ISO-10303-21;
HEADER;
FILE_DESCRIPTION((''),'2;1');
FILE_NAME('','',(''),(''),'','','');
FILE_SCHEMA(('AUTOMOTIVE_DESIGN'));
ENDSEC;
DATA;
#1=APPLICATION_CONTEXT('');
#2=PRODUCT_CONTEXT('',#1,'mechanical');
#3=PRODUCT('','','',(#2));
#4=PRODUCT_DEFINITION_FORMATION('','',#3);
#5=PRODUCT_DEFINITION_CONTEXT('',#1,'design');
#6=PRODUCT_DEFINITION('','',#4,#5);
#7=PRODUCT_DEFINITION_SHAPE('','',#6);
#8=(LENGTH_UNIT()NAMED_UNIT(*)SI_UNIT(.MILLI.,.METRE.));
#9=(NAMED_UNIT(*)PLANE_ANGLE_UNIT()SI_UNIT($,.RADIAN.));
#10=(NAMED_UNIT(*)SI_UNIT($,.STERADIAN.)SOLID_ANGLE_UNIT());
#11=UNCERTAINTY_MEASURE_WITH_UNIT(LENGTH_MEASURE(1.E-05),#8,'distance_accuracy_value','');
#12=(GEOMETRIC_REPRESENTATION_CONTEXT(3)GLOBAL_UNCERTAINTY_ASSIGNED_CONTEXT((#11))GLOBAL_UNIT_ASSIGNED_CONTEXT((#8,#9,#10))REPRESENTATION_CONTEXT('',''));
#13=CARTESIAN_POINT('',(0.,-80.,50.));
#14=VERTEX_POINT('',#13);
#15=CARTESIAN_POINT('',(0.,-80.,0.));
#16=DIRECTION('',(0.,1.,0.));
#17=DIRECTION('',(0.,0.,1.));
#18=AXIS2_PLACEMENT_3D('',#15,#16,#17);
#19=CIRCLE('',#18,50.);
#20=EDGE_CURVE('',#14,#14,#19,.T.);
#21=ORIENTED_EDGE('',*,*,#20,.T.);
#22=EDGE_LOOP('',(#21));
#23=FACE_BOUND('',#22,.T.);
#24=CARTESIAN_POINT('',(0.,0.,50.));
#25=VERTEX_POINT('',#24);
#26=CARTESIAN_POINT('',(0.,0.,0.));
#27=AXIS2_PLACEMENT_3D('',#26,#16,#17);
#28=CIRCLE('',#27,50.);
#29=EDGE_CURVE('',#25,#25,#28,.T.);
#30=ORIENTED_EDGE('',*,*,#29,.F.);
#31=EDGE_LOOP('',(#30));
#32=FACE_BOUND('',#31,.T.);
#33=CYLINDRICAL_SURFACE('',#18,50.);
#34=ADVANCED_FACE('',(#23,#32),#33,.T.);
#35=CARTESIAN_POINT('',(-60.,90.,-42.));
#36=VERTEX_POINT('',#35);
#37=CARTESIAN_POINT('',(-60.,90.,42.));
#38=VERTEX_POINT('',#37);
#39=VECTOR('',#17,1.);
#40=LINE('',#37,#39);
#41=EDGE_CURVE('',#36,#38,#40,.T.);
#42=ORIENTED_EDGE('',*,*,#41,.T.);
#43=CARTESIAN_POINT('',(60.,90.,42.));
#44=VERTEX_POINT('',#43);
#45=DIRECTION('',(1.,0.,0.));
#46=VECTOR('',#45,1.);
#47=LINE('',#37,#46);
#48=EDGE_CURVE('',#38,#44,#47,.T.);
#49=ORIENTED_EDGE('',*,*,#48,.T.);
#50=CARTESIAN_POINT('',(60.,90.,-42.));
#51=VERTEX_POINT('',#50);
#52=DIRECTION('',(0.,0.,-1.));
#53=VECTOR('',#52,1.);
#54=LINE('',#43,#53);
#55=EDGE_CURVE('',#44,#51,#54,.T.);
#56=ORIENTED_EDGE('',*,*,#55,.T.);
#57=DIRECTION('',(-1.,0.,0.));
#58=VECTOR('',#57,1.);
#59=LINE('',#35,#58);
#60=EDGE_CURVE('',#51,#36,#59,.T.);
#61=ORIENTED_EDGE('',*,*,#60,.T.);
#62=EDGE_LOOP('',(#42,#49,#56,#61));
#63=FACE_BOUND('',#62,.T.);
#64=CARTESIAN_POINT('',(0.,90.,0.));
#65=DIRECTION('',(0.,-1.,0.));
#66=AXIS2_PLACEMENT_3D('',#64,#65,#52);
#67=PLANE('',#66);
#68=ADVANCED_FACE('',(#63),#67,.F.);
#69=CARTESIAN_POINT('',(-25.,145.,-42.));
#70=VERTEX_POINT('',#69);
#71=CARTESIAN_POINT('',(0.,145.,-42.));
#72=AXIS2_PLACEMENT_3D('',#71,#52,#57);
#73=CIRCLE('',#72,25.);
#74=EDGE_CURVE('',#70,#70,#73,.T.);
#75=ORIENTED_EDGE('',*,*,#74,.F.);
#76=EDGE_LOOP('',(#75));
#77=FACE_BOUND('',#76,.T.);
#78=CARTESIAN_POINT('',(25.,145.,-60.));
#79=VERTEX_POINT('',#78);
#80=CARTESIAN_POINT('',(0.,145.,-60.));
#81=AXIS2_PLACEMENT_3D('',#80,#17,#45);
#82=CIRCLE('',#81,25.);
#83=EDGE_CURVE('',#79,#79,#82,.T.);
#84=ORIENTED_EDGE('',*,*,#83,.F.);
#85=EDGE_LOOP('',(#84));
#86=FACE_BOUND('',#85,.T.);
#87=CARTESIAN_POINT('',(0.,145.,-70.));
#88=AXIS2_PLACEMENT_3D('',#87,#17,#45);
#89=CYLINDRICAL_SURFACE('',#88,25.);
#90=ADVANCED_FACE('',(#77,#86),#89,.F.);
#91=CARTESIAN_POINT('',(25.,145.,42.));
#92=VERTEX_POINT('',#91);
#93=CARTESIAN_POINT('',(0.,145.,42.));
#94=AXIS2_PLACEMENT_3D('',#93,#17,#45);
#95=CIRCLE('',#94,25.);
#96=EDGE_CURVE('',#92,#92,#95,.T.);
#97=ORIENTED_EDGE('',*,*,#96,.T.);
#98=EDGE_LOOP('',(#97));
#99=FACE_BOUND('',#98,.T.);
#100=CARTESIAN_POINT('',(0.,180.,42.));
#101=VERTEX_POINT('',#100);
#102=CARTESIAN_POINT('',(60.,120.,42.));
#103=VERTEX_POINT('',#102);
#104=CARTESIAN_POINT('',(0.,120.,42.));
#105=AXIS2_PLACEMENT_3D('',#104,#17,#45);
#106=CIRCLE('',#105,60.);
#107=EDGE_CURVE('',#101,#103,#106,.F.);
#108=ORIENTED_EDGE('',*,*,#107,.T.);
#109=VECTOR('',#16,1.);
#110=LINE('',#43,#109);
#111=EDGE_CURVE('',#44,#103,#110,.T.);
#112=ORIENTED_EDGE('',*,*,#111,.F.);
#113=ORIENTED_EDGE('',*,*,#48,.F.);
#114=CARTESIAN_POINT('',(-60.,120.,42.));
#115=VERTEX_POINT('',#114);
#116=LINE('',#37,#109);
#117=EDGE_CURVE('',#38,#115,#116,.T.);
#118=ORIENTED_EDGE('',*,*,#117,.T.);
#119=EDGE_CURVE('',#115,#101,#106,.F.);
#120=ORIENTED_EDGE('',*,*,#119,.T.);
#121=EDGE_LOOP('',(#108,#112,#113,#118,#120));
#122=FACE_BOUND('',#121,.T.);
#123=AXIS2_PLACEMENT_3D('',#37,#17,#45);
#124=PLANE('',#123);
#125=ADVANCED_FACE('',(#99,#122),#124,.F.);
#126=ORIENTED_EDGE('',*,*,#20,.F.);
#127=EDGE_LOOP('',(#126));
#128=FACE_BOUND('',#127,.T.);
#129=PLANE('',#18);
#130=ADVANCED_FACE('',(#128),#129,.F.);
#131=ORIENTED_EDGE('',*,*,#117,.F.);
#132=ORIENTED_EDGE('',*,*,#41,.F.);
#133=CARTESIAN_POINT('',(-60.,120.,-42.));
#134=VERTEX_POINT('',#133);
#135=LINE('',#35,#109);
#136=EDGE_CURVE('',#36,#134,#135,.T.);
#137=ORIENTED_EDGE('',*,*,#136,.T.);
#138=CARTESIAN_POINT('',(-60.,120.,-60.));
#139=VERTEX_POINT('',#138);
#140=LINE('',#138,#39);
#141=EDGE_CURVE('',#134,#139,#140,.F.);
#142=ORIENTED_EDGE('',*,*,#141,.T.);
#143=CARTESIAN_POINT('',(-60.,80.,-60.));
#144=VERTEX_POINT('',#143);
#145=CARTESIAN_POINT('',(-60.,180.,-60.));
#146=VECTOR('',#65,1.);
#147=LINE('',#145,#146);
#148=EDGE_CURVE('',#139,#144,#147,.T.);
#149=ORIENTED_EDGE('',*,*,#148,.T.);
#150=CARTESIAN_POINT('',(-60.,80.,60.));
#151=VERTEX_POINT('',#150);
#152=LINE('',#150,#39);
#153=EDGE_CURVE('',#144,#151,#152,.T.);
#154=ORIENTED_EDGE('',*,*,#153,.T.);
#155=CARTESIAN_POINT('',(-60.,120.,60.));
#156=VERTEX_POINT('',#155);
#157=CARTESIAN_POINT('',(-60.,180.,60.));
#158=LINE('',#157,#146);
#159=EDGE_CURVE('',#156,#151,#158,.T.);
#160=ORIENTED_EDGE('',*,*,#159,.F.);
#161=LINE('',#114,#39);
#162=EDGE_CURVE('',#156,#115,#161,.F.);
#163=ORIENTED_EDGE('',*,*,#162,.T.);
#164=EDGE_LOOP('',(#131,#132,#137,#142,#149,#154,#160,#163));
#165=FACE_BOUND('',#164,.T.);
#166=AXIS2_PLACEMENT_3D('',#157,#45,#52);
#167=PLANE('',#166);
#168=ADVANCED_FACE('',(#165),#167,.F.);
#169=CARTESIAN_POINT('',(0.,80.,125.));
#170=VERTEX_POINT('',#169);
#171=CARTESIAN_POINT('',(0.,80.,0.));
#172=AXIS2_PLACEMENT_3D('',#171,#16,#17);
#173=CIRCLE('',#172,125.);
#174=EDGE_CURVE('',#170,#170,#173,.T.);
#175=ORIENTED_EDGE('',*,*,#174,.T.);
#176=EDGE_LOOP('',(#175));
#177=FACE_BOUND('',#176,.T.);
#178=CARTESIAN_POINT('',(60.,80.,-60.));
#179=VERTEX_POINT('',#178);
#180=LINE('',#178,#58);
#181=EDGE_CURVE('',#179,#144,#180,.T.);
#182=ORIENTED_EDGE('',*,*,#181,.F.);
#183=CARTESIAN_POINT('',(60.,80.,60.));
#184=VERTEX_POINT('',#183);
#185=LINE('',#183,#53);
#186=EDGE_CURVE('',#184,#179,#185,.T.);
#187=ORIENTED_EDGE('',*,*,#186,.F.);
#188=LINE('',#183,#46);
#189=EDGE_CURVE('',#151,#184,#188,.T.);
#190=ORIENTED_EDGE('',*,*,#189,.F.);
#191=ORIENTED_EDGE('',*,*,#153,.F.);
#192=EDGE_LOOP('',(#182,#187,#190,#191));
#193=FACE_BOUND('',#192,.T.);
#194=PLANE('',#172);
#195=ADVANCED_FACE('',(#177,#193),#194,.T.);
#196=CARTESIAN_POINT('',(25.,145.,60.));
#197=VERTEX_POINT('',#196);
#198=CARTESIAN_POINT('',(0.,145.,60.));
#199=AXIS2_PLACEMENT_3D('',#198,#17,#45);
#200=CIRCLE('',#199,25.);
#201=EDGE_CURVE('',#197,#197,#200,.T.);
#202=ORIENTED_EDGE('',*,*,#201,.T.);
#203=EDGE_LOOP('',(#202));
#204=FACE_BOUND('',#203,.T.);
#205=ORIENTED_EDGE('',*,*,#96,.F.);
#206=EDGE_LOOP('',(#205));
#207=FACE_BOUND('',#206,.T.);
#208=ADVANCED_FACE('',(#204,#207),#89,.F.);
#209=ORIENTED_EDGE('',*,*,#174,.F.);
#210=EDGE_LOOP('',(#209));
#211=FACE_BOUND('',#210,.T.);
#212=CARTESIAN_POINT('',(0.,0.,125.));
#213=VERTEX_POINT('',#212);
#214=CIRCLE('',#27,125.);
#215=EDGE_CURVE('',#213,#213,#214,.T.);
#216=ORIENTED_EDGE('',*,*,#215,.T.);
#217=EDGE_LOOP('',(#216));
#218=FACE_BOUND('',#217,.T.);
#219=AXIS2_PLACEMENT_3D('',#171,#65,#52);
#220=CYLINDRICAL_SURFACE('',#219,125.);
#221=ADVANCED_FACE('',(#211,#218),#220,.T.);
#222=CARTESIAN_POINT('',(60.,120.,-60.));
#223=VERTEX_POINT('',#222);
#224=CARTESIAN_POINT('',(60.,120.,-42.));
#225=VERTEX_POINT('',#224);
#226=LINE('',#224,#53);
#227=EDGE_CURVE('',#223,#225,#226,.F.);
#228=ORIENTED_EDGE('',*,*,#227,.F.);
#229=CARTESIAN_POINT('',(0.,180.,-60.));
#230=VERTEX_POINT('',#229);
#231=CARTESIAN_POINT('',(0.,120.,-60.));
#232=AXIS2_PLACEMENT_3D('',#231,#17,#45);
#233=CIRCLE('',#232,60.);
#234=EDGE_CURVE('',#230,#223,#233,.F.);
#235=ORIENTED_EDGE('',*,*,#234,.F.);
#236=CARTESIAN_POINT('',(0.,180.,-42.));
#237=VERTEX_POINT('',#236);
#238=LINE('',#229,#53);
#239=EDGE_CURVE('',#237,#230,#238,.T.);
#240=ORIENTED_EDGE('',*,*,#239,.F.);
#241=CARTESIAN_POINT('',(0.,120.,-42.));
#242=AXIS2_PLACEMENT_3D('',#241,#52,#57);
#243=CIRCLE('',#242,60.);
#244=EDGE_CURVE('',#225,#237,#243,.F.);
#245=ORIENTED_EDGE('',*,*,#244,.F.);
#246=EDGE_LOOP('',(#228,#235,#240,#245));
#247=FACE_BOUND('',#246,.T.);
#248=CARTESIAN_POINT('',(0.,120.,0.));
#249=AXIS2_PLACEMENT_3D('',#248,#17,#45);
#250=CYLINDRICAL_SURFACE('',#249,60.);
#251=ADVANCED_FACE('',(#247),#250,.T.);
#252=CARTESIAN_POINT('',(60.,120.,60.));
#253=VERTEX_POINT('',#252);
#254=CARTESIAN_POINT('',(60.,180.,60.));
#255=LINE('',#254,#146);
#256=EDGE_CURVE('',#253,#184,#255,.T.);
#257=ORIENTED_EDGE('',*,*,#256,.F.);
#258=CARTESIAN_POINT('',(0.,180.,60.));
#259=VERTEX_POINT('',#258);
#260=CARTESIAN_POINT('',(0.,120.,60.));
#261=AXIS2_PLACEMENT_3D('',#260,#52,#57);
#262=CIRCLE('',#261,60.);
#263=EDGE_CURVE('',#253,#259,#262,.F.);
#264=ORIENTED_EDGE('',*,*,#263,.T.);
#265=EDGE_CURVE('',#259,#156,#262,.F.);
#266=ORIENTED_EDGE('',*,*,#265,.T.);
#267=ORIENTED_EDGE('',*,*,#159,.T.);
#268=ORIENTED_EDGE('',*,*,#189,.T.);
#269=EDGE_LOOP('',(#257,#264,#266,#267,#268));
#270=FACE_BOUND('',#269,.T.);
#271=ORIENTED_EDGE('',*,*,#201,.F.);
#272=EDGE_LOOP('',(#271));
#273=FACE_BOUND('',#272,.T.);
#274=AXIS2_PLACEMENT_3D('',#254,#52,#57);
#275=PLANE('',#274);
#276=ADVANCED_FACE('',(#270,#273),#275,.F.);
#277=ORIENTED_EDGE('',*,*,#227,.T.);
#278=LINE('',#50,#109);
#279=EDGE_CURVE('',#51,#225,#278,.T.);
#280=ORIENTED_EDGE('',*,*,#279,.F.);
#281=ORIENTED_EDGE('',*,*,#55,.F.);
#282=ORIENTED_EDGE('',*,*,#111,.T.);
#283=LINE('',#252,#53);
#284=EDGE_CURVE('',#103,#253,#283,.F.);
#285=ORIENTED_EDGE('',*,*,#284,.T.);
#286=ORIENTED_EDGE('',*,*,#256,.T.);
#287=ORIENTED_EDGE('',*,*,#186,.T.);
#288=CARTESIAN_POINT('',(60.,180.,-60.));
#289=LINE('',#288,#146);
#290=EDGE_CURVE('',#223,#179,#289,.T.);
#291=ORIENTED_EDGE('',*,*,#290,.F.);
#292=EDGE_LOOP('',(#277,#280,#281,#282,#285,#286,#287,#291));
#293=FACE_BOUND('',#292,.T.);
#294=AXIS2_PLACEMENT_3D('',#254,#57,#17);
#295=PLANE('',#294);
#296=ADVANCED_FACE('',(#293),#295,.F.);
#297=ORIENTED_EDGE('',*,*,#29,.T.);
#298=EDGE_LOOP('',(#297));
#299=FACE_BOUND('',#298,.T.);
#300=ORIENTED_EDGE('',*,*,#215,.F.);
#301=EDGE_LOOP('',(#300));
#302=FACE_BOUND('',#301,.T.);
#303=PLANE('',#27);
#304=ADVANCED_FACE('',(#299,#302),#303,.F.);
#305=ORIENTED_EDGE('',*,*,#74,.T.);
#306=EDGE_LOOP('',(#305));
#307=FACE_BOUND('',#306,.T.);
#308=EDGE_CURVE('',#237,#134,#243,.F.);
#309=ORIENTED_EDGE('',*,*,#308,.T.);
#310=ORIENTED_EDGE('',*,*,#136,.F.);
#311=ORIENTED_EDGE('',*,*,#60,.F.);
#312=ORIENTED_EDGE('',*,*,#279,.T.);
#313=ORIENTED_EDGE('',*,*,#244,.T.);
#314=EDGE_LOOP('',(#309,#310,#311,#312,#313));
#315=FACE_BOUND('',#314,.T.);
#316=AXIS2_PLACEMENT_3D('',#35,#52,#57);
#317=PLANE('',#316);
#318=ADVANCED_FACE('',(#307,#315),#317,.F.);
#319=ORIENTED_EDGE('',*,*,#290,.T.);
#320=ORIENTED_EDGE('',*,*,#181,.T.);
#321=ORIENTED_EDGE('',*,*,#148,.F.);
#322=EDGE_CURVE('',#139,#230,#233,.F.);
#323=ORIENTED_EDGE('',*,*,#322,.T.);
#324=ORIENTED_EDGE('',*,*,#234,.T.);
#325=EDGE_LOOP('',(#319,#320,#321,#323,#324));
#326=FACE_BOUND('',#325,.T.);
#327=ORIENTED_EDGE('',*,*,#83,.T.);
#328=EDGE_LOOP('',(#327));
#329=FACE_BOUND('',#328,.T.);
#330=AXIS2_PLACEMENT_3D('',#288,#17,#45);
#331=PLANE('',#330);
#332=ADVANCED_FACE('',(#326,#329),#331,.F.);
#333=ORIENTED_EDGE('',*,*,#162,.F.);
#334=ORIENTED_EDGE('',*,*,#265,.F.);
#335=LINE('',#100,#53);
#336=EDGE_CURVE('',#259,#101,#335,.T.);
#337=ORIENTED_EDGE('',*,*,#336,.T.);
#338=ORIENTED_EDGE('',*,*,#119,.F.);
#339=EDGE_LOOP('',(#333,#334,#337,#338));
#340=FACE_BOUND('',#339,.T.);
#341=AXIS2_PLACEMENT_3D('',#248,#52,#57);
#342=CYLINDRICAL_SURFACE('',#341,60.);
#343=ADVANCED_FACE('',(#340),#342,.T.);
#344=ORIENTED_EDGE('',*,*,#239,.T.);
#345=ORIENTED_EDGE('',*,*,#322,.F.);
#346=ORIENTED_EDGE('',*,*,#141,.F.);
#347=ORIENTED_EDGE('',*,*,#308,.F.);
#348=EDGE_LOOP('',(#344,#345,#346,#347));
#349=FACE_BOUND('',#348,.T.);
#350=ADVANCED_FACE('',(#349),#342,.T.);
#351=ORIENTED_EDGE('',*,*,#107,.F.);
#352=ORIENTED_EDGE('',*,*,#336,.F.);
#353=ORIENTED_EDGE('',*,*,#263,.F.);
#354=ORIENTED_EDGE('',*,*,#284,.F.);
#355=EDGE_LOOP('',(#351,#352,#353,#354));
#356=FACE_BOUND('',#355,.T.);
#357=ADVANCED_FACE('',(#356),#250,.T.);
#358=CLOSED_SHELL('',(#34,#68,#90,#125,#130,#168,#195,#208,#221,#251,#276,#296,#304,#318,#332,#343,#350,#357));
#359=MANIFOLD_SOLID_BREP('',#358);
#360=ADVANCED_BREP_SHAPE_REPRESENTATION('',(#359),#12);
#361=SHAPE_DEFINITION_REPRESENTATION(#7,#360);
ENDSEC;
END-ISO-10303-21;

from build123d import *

# Parameters (mm, degrees)
SKETCH1_R           = 125
BOSS_EXTRUDE1_DEPTH = 80
SKETCH2_R           = 50
BOSS_EXTRUDE2_DEPTH = 160
SKETCH3_W           = 120
SKETCH3_H           = 120
BOSS_EXTRUDE3_DEPTH = 100
SKETCH4_W           = 120
SKETCH4_H           = 84
CUT_EXTRUDE1_DEPTH  = 90
FILLET1_R           = 60
SKETCH5_R           = 25
CUT_EXTRUDE2_DEPTH  = 130


with BuildPart() as part:
    # Sketch1 → Boss-Extrude1 (new body)
    with BuildSketch(Plane(origin=(0, 0, 0), x_dir=(1, 0, 0), z_dir=(0, 1, 0))):
        with Locations(Location((0, 0, 0), (0, 0, 270))):
            Circle(SKETCH1_R)
    extrude(amount=BOSS_EXTRUDE1_DEPTH)

    # Sketch2 → Boss-Extrude2 (add)
    with BuildSketch(Plane(origin=(0, 80, 0), x_dir=(1, 0, 0), z_dir=(0, 1, 0))):
        with Locations(Location((0, 0, 0), (0, 0, 270))):
            Circle(SKETCH2_R)
    extrude(amount=-BOSS_EXTRUDE2_DEPTH)

    # Sketch3 → Boss-Extrude3 (add)
    with BuildSketch(Plane(origin=(0, 80, 0), x_dir=(1, 0, 0), z_dir=(0, 1, 0))):
        Rectangle(SKETCH3_W, SKETCH3_H)
    extrude(amount=BOSS_EXTRUDE3_DEPTH)

    # Sketch4 → Cut-Extrude1 (cut)
    with BuildSketch(Plane(origin=(0, 180, 0), x_dir=(1, 0, 0), z_dir=(0, 1, 0))):
        Rectangle(SKETCH4_W, SKETCH4_H)
    extrude(amount=-CUT_EXTRUDE1_DEPTH, mode=Mode.SUBTRACT)

    # Fillet1
    fillet1_edges = [part.edges().sort_by_distance(p)[0] for p in [
        (-60, 180, 51),
        (-60, 180, -51),
        (60, 180, -51),
        (60, 180, 51),
    ]]
    fillet(fillet1_edges, radius=FILLET1_R - 0.0001)  # a hair under: the kernel refuses the full size

    # Sketch5 → Cut-Extrude2 (cut)
    with BuildSketch(Plane.XY.offset(60)):
        with Locations((0, 145)):
            Circle(SKETCH5_R)
    extrude(amount=-CUT_EXTRUDE2_DEPTH, mode=Mode.SUBTRACT)


solid = part.part
